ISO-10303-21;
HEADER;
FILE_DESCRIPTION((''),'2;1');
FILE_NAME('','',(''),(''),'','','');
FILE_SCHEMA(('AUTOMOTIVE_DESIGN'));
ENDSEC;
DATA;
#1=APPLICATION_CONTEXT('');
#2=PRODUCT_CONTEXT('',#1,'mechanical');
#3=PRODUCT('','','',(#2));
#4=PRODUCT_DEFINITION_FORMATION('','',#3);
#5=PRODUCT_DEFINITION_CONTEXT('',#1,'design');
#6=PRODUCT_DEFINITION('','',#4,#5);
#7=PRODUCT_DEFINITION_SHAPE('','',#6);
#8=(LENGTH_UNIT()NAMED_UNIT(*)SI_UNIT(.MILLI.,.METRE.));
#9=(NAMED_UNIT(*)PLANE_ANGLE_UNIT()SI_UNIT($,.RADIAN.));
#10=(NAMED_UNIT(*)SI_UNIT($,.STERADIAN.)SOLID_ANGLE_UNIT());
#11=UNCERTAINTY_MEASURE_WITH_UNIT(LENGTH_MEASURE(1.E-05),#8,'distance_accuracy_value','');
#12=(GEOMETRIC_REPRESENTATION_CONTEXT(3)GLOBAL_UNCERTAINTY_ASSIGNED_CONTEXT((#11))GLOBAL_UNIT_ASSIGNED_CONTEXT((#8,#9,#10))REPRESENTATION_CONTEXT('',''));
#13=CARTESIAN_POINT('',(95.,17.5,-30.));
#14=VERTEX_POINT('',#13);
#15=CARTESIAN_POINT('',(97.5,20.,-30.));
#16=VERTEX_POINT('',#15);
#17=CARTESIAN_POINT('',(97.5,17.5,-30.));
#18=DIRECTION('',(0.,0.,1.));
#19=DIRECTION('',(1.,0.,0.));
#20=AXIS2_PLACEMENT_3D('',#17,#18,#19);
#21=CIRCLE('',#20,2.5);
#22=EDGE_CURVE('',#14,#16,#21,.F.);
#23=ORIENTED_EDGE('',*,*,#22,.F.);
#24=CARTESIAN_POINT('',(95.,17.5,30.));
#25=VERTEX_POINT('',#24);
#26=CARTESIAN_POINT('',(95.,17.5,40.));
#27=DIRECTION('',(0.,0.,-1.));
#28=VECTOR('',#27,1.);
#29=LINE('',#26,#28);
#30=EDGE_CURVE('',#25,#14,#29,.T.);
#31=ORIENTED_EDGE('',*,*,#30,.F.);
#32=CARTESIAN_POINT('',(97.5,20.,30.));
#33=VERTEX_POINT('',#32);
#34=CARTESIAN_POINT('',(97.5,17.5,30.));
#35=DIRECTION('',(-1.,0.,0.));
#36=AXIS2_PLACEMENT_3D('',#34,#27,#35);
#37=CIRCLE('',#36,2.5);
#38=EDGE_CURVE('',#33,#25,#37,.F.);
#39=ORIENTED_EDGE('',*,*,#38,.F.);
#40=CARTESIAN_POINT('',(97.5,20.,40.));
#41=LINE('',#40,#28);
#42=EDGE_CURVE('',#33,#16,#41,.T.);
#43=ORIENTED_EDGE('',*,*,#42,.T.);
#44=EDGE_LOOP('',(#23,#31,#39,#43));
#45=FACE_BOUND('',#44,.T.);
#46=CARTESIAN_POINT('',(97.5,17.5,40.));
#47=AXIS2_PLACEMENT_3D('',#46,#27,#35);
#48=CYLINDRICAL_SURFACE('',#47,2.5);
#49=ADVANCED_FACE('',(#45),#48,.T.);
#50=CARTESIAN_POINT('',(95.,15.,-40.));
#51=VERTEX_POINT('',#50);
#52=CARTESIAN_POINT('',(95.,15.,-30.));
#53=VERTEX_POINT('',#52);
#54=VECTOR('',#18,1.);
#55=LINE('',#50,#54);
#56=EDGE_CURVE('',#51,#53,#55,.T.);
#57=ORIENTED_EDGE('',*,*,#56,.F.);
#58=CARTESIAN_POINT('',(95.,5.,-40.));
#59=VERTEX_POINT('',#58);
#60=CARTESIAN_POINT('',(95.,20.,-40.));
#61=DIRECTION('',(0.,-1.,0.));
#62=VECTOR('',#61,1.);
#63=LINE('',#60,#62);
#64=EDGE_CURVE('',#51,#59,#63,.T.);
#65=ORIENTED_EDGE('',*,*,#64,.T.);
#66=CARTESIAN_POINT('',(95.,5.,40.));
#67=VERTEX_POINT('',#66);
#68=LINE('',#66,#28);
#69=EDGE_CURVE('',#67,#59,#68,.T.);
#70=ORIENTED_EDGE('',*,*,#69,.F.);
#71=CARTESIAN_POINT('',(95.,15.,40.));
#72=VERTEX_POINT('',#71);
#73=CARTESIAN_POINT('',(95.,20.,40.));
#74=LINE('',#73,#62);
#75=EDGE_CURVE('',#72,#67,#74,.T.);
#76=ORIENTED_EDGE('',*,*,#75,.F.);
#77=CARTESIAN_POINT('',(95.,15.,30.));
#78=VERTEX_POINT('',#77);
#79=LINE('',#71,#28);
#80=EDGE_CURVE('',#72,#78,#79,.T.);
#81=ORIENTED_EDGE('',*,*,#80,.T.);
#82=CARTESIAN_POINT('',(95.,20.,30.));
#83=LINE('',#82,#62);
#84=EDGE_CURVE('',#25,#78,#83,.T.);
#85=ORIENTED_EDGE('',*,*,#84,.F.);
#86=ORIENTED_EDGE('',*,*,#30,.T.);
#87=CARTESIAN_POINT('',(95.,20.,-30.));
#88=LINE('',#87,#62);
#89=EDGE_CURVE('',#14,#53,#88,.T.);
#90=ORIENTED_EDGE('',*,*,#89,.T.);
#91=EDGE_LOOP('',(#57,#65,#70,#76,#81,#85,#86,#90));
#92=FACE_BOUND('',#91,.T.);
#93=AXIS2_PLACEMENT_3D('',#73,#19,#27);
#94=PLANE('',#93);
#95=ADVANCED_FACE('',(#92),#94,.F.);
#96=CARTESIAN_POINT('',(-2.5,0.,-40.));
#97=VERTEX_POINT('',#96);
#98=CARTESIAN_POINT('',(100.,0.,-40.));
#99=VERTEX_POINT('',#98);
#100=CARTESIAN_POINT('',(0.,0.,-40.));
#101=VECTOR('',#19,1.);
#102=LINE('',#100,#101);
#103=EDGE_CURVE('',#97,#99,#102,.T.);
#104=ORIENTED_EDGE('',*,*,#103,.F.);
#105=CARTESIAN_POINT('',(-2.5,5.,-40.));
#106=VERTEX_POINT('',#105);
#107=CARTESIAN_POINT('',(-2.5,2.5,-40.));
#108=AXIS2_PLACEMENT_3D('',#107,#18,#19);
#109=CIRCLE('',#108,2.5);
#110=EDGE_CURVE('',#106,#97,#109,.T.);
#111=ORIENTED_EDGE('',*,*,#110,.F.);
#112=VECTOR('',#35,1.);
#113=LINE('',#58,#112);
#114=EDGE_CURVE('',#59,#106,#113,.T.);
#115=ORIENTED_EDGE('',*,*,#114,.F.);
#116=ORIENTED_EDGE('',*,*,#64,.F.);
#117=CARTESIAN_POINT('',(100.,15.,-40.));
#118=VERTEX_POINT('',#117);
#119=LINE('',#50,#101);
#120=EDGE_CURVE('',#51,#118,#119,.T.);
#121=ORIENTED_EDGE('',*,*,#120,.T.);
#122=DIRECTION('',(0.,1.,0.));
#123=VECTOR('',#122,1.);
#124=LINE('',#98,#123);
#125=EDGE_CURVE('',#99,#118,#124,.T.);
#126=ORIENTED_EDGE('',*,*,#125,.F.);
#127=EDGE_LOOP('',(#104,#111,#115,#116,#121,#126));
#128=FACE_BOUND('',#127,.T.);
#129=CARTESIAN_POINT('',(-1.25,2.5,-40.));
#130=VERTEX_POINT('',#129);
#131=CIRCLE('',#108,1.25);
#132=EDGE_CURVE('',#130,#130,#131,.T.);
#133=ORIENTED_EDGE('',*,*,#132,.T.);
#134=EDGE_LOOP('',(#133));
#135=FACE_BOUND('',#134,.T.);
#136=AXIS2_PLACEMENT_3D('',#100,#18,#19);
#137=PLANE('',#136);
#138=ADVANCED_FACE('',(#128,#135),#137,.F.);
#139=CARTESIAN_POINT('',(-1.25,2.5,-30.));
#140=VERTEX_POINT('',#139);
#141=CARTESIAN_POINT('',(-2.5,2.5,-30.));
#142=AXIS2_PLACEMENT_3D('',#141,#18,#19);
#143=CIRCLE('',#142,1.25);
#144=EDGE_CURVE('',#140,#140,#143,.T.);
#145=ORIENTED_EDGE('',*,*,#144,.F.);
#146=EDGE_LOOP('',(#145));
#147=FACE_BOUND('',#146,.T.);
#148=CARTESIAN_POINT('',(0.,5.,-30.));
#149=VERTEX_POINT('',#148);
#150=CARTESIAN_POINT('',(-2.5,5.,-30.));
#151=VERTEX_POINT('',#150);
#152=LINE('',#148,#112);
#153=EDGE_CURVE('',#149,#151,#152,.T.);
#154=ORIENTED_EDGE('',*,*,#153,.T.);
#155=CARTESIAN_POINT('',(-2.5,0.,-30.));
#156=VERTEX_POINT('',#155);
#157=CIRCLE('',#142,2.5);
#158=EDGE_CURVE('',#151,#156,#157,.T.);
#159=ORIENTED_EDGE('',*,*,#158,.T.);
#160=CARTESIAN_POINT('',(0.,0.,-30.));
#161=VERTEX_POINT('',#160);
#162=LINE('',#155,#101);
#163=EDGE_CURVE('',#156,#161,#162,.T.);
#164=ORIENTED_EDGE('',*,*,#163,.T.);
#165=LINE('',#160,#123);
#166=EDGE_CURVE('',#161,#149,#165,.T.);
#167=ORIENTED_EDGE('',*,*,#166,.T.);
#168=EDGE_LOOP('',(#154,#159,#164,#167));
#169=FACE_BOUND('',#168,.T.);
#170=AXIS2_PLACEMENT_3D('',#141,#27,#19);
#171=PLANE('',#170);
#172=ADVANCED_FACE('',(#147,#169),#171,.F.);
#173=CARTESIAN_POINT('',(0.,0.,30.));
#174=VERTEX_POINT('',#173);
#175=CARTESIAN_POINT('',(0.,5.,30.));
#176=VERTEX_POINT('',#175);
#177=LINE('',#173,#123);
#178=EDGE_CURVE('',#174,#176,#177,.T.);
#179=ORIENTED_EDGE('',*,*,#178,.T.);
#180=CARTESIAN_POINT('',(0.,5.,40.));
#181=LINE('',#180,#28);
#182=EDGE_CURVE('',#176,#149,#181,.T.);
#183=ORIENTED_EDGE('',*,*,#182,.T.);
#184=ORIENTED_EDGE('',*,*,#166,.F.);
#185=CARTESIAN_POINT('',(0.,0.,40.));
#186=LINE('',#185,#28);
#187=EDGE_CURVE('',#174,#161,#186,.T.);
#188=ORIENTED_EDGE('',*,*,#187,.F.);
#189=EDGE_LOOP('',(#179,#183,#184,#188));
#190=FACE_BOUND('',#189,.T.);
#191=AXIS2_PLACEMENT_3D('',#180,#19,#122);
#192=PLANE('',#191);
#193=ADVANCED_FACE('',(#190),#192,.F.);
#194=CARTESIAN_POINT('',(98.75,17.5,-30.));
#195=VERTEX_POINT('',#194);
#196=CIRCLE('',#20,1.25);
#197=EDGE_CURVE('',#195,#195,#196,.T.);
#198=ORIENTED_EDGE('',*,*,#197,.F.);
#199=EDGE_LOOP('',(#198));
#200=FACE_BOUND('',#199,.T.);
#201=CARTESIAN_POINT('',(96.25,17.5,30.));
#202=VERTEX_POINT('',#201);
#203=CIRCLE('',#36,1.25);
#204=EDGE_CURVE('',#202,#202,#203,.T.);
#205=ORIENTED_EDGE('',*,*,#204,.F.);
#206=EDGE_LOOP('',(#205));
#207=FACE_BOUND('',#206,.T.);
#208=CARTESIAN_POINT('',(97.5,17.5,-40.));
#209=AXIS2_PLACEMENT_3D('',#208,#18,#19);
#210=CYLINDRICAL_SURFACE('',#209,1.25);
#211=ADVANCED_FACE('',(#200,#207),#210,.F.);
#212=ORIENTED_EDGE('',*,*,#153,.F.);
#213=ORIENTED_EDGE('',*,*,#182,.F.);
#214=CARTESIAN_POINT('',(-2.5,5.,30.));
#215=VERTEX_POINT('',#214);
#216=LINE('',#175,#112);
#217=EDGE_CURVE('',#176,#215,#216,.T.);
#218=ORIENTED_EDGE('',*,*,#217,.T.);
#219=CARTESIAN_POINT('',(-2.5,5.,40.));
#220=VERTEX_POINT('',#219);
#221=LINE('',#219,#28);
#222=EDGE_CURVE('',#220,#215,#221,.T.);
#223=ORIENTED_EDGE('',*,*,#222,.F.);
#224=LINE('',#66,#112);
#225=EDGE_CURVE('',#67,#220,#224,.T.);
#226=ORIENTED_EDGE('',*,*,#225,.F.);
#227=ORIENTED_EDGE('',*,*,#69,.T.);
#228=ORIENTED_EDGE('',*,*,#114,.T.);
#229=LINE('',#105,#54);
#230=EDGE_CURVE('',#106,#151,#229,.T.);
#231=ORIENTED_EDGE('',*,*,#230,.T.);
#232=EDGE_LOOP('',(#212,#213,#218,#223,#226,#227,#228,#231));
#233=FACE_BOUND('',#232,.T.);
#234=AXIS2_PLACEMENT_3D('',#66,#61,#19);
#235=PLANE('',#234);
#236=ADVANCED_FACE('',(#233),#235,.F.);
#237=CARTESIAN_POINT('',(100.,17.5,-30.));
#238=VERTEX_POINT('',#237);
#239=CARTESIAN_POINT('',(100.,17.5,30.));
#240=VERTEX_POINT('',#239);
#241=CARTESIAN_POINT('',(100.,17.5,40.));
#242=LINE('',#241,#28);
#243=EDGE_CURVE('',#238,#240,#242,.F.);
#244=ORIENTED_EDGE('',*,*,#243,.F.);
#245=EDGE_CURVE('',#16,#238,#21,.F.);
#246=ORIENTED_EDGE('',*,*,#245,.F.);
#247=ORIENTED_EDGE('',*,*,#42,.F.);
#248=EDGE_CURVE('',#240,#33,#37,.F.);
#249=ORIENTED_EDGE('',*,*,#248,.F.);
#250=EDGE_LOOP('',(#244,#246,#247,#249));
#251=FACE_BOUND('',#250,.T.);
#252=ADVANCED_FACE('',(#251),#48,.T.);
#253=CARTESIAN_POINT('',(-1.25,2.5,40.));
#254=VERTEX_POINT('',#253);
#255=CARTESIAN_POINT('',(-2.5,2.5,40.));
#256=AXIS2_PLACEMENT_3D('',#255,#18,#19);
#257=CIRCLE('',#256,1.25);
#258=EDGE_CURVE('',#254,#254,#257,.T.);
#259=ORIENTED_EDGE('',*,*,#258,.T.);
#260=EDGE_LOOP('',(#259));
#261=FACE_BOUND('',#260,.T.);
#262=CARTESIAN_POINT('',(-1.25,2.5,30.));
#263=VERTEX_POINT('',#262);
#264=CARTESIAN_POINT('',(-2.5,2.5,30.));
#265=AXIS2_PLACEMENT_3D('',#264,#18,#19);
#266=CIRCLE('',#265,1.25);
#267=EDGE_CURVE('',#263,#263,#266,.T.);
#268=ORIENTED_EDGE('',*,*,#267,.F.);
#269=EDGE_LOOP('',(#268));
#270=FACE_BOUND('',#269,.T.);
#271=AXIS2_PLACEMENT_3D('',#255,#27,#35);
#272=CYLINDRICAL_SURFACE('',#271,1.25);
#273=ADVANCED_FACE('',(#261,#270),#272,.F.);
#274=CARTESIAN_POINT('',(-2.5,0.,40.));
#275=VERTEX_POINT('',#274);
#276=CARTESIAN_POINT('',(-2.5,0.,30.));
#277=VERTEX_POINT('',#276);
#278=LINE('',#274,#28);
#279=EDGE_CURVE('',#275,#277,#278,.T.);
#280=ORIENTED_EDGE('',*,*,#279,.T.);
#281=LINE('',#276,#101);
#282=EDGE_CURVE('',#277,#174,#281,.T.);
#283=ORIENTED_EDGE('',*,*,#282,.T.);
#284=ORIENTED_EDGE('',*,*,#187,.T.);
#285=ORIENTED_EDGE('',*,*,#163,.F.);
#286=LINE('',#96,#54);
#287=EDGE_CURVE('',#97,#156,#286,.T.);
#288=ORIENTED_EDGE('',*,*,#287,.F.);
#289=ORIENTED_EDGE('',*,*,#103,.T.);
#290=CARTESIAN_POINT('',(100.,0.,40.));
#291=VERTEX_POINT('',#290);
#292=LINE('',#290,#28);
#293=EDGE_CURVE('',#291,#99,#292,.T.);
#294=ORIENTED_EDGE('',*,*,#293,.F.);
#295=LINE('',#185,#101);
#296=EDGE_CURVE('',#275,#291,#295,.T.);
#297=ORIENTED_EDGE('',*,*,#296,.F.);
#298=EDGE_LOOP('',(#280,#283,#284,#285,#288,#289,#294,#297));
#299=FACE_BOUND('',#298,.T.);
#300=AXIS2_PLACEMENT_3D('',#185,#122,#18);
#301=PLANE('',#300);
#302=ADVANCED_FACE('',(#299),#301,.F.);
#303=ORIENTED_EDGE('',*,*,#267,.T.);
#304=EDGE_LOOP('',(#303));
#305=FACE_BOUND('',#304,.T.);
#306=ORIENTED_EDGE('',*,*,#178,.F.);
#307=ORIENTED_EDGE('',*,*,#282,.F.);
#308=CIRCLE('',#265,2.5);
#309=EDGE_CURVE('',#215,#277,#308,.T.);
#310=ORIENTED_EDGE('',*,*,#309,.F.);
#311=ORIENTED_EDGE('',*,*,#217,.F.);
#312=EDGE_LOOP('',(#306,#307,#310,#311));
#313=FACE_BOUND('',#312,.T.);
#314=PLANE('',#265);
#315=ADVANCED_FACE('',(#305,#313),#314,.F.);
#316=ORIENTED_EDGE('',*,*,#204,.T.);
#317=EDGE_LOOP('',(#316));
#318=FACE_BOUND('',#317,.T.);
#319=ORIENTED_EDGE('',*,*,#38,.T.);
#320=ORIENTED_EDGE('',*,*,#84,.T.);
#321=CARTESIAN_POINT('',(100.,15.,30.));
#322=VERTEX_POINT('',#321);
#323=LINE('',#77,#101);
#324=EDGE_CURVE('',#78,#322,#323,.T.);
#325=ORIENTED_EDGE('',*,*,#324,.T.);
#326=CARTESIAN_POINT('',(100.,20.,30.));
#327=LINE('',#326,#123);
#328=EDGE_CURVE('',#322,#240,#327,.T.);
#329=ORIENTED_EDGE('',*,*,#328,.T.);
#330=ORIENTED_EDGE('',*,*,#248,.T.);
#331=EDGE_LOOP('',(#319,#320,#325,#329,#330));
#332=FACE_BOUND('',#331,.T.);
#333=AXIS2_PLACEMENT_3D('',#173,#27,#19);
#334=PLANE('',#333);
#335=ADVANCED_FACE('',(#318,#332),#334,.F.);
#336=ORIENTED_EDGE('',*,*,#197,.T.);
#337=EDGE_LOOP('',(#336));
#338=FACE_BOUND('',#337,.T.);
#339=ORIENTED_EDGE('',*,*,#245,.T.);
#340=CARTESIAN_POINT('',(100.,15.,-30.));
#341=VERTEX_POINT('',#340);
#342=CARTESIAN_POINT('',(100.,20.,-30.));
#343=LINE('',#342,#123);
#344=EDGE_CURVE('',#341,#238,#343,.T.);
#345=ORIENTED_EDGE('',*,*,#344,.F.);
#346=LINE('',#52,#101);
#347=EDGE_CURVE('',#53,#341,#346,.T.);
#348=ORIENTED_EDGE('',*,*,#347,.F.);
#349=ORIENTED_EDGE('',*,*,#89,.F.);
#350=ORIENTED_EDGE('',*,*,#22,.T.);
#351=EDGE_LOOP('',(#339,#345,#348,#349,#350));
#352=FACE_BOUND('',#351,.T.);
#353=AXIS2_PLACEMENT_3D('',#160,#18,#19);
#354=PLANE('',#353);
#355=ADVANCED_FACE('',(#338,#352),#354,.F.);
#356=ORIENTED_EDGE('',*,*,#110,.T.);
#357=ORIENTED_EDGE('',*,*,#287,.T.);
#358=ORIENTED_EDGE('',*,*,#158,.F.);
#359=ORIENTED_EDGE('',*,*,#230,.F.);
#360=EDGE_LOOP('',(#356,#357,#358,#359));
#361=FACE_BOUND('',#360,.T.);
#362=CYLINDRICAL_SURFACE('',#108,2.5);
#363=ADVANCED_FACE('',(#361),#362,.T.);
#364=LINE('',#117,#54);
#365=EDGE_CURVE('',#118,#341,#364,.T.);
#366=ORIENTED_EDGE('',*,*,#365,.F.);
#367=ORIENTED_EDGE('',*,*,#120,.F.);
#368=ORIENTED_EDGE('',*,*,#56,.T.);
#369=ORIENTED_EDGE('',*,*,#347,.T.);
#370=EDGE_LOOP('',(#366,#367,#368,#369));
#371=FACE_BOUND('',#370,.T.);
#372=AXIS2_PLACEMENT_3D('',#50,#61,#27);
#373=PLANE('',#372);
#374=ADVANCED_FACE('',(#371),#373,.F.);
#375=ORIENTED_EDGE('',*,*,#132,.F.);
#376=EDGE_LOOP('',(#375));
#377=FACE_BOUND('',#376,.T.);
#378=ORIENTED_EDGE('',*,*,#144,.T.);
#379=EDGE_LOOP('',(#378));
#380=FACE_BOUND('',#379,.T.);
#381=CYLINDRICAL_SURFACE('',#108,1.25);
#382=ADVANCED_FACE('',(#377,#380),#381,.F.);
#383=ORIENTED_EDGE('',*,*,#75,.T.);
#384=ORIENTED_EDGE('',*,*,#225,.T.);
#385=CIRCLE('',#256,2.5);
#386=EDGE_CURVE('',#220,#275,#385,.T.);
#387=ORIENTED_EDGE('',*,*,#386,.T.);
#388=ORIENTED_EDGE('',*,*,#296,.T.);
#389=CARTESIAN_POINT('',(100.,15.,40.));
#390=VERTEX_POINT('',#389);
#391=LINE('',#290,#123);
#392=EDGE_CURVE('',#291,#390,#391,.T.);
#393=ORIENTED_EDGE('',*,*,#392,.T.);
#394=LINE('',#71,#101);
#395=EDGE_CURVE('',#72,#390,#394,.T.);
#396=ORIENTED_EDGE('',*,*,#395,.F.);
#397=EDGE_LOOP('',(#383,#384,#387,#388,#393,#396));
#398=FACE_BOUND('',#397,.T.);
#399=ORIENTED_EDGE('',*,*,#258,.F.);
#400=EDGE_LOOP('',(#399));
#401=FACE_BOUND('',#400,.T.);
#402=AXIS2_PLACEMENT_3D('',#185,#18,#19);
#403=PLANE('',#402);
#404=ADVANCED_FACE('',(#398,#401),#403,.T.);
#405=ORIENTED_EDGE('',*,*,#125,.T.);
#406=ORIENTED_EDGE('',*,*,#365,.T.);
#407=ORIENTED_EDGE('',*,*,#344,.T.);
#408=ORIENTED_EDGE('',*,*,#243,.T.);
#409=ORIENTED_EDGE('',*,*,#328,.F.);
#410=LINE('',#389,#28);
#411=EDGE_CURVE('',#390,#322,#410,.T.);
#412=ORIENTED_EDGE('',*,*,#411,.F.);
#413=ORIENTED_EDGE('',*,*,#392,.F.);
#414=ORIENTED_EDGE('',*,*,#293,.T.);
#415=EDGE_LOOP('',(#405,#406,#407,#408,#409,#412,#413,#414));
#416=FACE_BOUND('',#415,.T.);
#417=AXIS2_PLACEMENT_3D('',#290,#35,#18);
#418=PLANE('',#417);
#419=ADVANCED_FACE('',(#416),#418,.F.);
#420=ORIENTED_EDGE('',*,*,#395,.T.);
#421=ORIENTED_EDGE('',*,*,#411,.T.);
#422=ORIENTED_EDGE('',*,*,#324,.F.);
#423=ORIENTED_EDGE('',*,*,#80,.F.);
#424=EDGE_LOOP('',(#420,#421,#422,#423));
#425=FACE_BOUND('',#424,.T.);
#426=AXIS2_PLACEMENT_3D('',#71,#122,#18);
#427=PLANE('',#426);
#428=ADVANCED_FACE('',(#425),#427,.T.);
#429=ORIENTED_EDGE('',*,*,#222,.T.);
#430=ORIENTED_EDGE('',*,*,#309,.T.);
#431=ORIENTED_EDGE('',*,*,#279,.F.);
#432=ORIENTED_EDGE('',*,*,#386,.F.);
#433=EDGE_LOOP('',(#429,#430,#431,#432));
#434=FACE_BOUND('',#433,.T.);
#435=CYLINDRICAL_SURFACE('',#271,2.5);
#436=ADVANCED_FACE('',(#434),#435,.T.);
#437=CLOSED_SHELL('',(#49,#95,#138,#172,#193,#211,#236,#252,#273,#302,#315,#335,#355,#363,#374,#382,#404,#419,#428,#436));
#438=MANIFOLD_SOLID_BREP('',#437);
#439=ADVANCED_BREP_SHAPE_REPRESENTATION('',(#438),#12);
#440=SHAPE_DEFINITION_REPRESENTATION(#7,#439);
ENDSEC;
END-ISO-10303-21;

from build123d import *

# Parameters (mm, degrees)
BOSS_EXTRUDE1_DEPTH     = 40
BOSS_EXTRUDE2_START     = 30
SKETCH2_R               = 1.25
BOSS_EXTRUDE2_DEPTH     = 10
CUT_EXTRUDE1_START      = -30
SKETCH3_W               = 5
SKETCH3_H               = 5
CUT_EXTRUDE1_DEPTH      = 10
CUT_EXTRUDE2_DEPTH      = 110.544511501
CUT_EXTRUDE2_DEPTH_BACK = 110.544511501
SKETCH4_R               = 1.25
FILLET1_R               = 2.5


with BuildPart() as part:
    # Sketch1 → Boss-Extrude1 (new, symmetric)
    with BuildSketch(Plane.XY):
        Polygon((0, 0), (100, 0), (100, 20), (95, 20), (95, 5), (0, 5), align=None)
    extrude(amount=BOSS_EXTRUDE1_DEPTH, both=True)

    # Sketch2 → Boss-Extrude2 (add)
    with BuildSketch(Plane.XY.offset(BOSS_EXTRUDE2_START)):
        with BuildLine():
            Line((0, 5), (-2.5, 5))
            ThreePointArc((-2.5, 5), (-5, 2.5), (-2.5, 0))
            Line((-2.5, 0), (0, 0))
            Line((0, 0), (0, 5))
        make_face()
        with Locations((-2.5, 2.5)):
            Circle(SKETCH2_R, mode=Mode.SUBTRACT)
    boss_extrude2 = extrude(amount=BOSS_EXTRUDE2_DEPTH)

    # Mirror2: Boss-Extrude2 across plane
    add(boss_extrude2.mirror(Plane.XY))

    # Sketch3 → Cut-Extrude1 (cut)
    with BuildSketch(Plane.XY.offset(CUT_EXTRUDE1_START)):
        with Locations((97.5, 17.5)):
            Rectangle(SKETCH3_W, SKETCH3_H)
    cut_extrude1 = extrude(amount=-CUT_EXTRUDE1_DEPTH, mode=Mode.SUBTRACT)

    # Mirror3: Cut-Extrude1 across plane
    add(cut_extrude1.mirror(Plane.XY), mode=Mode.SUBTRACT)

    # Sketch4 → Cut-Extrude2 (cut, two sides: drawn at the far end of the back side and taken through both)
    with BuildSketch(Plane.XY.offset(-CUT_EXTRUDE2_DEPTH_BACK)):
        with Locations((97.5, 17.5)):
            Circle(SKETCH4_R)
    extrude(amount=CUT_EXTRUDE2_DEPTH + CUT_EXTRUDE2_DEPTH_BACK, mode=Mode.SUBTRACT)

    # Fillet1
    fillet1_edges = [part.edges().sort_by_distance(p)[0] for p in [
        (95, 20, 0),
        (100, 20, 0),
    ]]
    fillet(fillet1_edges, radius=FILLET1_R - 0.0001)  # a hair under: the kernel refuses the full size


solid = part.part
